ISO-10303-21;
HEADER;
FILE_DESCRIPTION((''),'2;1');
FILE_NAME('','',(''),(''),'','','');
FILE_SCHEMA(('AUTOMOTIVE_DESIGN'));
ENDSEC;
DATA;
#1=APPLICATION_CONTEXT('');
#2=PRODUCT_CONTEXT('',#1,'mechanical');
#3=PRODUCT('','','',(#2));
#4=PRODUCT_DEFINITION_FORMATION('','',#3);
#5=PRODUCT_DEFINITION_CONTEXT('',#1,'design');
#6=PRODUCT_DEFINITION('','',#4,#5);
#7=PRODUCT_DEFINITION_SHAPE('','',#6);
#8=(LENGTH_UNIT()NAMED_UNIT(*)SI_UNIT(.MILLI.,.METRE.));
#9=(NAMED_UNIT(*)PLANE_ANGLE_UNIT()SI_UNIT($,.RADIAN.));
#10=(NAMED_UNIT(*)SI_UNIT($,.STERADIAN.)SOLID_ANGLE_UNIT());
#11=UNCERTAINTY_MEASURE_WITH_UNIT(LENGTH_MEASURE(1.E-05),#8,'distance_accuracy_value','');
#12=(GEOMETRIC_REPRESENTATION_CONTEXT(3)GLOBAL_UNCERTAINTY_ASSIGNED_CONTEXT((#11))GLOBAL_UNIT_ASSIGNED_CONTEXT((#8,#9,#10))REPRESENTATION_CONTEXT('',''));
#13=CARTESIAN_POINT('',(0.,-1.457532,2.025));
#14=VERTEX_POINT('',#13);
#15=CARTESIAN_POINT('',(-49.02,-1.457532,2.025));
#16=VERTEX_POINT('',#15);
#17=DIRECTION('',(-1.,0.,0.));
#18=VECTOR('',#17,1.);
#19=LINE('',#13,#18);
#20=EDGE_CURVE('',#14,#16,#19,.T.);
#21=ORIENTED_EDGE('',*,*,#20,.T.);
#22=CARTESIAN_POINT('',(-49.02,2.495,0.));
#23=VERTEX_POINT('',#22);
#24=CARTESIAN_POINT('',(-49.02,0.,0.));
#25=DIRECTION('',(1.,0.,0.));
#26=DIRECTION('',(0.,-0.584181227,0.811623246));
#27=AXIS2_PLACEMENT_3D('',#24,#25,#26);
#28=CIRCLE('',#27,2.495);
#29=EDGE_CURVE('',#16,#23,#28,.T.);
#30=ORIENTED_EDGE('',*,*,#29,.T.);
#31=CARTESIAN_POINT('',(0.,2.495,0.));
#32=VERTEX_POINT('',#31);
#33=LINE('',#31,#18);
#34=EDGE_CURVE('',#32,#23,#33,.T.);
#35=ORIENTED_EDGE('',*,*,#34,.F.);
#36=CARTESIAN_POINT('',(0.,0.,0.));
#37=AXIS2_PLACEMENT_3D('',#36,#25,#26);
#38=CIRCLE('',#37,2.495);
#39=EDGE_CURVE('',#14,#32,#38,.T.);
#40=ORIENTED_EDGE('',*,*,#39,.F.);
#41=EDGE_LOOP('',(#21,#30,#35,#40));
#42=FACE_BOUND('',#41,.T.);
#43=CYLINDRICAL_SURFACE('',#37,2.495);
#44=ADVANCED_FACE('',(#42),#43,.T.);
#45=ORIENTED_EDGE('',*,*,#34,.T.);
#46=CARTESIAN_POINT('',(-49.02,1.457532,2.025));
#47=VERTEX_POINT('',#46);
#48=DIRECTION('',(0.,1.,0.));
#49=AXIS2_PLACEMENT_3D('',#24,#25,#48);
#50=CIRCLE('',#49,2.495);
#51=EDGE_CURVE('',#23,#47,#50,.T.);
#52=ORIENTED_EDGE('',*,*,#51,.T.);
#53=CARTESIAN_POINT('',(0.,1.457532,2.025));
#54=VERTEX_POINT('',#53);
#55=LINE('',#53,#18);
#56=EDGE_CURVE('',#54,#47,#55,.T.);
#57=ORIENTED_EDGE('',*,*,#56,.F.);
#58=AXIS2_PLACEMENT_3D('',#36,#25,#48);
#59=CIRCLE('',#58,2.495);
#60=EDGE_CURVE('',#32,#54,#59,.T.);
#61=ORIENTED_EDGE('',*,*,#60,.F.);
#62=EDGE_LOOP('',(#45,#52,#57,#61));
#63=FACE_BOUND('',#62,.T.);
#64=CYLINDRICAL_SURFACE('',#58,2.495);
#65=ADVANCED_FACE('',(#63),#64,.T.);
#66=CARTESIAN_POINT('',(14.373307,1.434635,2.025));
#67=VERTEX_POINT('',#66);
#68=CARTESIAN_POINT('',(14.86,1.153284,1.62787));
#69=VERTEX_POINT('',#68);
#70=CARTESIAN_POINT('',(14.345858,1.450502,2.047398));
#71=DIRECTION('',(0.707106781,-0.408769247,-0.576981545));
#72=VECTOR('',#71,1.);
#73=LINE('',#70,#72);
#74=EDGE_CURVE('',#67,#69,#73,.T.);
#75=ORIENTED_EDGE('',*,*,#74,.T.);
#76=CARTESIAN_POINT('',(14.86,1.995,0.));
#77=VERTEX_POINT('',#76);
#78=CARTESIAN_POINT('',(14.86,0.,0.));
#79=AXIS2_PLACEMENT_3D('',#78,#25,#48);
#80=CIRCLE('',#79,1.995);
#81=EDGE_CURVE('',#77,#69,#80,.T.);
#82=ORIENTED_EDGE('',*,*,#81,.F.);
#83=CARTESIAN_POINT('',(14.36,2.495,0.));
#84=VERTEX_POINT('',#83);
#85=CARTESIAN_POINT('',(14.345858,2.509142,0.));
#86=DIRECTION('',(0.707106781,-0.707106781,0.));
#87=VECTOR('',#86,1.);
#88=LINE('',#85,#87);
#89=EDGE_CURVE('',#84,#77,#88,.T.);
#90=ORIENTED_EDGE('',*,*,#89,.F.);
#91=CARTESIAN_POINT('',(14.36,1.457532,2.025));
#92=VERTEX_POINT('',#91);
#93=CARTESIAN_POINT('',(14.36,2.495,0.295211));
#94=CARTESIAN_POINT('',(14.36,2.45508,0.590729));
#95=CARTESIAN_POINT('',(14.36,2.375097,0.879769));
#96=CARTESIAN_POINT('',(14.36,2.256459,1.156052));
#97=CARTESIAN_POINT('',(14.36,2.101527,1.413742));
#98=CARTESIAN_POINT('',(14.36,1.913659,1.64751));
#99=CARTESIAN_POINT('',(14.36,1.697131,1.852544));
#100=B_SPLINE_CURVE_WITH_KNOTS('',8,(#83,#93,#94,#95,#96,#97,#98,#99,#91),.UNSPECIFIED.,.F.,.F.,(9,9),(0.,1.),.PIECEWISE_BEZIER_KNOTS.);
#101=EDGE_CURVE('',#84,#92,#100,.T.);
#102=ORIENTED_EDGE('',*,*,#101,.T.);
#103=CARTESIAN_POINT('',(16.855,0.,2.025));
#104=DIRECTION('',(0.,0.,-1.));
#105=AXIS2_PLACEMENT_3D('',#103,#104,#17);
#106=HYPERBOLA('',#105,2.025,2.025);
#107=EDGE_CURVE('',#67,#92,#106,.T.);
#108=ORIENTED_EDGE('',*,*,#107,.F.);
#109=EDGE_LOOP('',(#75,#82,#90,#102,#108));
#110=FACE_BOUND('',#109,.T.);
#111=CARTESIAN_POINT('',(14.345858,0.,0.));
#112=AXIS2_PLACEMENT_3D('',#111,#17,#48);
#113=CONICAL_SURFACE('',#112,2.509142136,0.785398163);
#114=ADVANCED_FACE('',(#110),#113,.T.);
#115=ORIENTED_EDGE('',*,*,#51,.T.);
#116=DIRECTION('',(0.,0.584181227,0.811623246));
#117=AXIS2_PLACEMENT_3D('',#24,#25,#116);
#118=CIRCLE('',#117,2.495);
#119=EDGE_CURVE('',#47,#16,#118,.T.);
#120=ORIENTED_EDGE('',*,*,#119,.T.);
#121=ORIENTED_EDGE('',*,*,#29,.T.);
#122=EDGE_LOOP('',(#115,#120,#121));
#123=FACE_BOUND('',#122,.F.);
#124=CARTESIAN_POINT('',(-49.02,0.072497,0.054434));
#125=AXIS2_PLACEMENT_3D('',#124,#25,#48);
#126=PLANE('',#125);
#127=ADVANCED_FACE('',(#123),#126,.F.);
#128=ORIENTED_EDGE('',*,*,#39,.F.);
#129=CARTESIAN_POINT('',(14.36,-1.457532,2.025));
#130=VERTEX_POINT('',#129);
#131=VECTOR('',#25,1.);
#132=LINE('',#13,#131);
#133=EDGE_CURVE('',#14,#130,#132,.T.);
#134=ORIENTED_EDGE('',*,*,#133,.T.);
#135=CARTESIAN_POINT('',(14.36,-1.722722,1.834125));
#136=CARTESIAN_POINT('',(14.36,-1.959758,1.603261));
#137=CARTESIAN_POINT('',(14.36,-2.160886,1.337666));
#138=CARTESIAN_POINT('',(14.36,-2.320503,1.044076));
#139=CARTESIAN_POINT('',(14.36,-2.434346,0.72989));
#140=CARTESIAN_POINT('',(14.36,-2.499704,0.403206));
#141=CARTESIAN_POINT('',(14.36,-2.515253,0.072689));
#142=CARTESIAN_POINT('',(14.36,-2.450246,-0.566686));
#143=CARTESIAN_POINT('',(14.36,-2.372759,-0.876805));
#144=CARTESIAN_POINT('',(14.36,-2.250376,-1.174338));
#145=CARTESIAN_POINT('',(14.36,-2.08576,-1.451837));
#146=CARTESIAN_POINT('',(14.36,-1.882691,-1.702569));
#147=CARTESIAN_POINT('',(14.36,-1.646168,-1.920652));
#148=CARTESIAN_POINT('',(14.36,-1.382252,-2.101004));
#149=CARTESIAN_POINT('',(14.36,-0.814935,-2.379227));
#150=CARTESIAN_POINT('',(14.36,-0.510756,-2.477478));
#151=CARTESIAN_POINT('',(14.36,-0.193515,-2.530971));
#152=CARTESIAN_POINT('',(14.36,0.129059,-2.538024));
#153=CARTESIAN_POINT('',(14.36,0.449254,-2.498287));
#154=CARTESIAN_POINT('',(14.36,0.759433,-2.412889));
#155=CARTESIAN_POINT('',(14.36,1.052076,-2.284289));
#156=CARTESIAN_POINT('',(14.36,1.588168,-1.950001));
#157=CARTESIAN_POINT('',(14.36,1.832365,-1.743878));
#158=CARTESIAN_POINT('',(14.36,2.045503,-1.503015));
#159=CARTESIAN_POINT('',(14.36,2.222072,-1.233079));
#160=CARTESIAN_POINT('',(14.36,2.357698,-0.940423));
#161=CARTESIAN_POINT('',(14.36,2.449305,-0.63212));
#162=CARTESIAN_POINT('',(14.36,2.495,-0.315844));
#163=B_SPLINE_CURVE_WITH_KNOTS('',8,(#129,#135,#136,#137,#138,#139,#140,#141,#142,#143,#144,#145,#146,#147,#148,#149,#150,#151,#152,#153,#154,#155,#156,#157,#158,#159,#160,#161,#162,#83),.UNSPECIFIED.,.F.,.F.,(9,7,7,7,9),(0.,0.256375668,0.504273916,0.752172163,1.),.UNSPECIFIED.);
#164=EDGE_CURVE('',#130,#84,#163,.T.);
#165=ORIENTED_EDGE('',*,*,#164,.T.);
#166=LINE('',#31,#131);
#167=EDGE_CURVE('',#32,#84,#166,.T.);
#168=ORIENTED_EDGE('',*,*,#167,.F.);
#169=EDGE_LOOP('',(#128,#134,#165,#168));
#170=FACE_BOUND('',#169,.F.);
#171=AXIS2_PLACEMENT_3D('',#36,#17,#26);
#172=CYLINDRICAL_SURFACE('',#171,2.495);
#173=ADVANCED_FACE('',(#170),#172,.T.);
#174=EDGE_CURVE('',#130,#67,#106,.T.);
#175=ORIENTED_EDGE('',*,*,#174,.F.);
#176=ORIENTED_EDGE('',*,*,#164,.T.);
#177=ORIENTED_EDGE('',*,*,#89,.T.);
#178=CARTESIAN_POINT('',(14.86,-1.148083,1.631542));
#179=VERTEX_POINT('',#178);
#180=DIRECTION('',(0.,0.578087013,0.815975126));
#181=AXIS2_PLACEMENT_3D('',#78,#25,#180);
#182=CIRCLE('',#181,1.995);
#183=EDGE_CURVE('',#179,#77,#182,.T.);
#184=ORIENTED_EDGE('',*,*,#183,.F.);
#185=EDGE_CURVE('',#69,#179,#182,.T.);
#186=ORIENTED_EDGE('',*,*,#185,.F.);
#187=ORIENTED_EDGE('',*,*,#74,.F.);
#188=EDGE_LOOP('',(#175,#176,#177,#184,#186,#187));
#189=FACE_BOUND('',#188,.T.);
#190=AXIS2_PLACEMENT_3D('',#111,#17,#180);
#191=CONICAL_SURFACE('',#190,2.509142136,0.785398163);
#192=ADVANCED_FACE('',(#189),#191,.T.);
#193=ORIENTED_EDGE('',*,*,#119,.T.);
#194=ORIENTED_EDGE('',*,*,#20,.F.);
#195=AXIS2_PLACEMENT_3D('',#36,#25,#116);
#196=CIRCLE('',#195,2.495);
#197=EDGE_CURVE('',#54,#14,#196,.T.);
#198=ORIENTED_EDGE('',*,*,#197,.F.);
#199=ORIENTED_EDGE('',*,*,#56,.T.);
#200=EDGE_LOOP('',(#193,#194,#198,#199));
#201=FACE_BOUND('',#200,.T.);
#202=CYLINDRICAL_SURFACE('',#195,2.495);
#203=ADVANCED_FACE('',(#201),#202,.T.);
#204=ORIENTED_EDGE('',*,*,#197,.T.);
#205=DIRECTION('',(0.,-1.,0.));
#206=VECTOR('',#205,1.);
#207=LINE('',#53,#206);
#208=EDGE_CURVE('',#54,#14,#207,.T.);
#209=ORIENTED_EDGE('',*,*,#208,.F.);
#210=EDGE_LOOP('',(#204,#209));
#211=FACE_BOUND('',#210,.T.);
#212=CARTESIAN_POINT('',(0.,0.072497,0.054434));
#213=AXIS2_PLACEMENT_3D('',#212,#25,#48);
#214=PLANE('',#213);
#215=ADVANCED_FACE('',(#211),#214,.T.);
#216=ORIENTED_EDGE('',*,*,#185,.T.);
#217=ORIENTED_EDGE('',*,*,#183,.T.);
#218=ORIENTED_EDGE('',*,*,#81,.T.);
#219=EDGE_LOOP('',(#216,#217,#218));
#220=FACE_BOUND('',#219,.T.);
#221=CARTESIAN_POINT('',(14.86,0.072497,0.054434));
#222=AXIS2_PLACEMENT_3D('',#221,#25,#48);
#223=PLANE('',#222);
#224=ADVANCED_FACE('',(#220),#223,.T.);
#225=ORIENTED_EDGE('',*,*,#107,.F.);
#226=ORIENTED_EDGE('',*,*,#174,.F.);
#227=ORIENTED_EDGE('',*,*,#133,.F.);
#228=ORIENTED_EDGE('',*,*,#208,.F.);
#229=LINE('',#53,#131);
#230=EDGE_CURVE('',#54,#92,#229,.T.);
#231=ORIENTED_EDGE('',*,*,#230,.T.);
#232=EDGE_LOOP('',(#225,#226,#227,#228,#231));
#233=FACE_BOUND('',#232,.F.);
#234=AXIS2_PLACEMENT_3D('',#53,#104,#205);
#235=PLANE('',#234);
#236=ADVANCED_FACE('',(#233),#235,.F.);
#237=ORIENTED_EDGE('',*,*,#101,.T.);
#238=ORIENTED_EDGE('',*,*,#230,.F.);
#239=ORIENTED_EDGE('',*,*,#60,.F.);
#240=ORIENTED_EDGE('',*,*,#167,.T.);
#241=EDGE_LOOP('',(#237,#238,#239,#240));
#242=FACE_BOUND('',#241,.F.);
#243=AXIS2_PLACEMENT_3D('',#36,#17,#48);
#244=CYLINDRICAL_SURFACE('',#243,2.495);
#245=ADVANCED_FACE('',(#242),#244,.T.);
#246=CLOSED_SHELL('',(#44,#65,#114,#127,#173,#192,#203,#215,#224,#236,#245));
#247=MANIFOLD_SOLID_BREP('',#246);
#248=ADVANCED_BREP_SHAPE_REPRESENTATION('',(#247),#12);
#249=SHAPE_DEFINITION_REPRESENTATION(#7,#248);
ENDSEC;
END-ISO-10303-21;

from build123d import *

# Parameters (mm, degrees)
F1_DEPTH    = 49.02
F2_DEPTH    = 14.86
F3_T2_ANGLE = 305.3161054709
F3_T4_ANGLE = 125.133270501


# Not quite as in the source:
# - a fillet or chamfer that OpenCascade refuses, or shapes differently, is made with other operations: its cross-section is extruded or revolved along the edge and cut away or added


with BuildPart() as f1:
    # F0 (on Right) → F1 (new body)
    with BuildSketch(Plane.YZ):
        with BuildLine():
            ThreePointArc((-1.4575321609, 2.025), (-1.1376471902, -2.2205368429), (2.495, 0))
            ThreePointArc((2.495, 0), (2.2205368429, 1.1376471902), (1.4575321609, 2.025))
            Line((1.4575321609, 2.025), (-1.4575321609, 2.025))
        make_face()
        with BuildLine():
            Line((-1.4575321609, 2.025), (1.4575321609, 2.025))
            ThreePointArc((1.4575321609, 2.025), (0, 2.495), (-1.4575321609, 2.025))
        make_face()
    extrude(amount=-F1_DEPTH)

    # F0 (on Right) → F2 (join)
    with BuildSketch(Plane.YZ):
        with BuildLine():
            ThreePointArc((-1.4575321609, 2.025), (-1.1376471902, -2.2205368429), (2.495, 0))
            ThreePointArc((2.495, 0), (2.2205368429, 1.1376471902), (1.4575321609, 2.025))
            Line((1.4575321609, 2.025), (-1.4575321609, 2.025))
        make_face()
    extrude(amount=F2_DEPTH)

    # F3: chamfer of 0.5 on 2 edges, made by hand

    # F3_s1 → F3_t2 (revolve, cut)
    with BuildSketch(Plane(origin=(0, 0, 0), x_dir=(1, 0, 0), z_dir=(0, 0.8159751258, -0.5780870125))):
        with BuildLine():
            Line((14.3458578644, -2.5091421356), (14.8741421356, -1.9808578644))
            Line((14.8741421356, -1.9808578644), (14.8841421356, -1.9808578644))
            ThreePointArc((14.8841421356, -1.9808578644), (14.87, -2.2379289322), (14.87, -2.495))
            Line((14.87, -2.495), (14.86, -2.505))
            ThreePointArc((14.86, -2.505), (14.6029289322, -2.505), (14.3458578644, -2.5191421356))
            Line((14.3458578644, -2.5191421356), (14.3458578644, -2.5091421356))
        make_face()
    revolve(axis=Axis((14.86, 0, 0), (1, 0, 0)), revolution_arc=F3_T2_ANGLE, mode=Mode.SUBTRACT)

    # F3_s3 → F3_t4 (revolve, cut)
    with BuildSketch(Plane.XY):
        with BuildLine():
            Line((14.3458578644, 2.5091421356), (14.8741421356, 1.9808578644))
            Line((14.8741421356, 1.9808578644), (14.8841421356, 1.9808578644))
            ThreePointArc((14.8841421356, 1.9808578644), (14.87, 2.2379289322), (14.87, 2.495))
            Line((14.87, 2.495), (14.86, 2.505))
            ThreePointArc((14.86, 2.505), (14.6029289322, 2.505), (14.3458578644, 2.5191421356))
            Line((14.3458578644, 2.5191421356), (14.3458578644, 2.5091421356))
        make_face()
    revolve(axis=Axis((14.86, 0, 0), (1, 0, 0)), revolution_arc=F3_T4_ANGLE, mode=Mode.SUBTRACT)


solid = f1.part
